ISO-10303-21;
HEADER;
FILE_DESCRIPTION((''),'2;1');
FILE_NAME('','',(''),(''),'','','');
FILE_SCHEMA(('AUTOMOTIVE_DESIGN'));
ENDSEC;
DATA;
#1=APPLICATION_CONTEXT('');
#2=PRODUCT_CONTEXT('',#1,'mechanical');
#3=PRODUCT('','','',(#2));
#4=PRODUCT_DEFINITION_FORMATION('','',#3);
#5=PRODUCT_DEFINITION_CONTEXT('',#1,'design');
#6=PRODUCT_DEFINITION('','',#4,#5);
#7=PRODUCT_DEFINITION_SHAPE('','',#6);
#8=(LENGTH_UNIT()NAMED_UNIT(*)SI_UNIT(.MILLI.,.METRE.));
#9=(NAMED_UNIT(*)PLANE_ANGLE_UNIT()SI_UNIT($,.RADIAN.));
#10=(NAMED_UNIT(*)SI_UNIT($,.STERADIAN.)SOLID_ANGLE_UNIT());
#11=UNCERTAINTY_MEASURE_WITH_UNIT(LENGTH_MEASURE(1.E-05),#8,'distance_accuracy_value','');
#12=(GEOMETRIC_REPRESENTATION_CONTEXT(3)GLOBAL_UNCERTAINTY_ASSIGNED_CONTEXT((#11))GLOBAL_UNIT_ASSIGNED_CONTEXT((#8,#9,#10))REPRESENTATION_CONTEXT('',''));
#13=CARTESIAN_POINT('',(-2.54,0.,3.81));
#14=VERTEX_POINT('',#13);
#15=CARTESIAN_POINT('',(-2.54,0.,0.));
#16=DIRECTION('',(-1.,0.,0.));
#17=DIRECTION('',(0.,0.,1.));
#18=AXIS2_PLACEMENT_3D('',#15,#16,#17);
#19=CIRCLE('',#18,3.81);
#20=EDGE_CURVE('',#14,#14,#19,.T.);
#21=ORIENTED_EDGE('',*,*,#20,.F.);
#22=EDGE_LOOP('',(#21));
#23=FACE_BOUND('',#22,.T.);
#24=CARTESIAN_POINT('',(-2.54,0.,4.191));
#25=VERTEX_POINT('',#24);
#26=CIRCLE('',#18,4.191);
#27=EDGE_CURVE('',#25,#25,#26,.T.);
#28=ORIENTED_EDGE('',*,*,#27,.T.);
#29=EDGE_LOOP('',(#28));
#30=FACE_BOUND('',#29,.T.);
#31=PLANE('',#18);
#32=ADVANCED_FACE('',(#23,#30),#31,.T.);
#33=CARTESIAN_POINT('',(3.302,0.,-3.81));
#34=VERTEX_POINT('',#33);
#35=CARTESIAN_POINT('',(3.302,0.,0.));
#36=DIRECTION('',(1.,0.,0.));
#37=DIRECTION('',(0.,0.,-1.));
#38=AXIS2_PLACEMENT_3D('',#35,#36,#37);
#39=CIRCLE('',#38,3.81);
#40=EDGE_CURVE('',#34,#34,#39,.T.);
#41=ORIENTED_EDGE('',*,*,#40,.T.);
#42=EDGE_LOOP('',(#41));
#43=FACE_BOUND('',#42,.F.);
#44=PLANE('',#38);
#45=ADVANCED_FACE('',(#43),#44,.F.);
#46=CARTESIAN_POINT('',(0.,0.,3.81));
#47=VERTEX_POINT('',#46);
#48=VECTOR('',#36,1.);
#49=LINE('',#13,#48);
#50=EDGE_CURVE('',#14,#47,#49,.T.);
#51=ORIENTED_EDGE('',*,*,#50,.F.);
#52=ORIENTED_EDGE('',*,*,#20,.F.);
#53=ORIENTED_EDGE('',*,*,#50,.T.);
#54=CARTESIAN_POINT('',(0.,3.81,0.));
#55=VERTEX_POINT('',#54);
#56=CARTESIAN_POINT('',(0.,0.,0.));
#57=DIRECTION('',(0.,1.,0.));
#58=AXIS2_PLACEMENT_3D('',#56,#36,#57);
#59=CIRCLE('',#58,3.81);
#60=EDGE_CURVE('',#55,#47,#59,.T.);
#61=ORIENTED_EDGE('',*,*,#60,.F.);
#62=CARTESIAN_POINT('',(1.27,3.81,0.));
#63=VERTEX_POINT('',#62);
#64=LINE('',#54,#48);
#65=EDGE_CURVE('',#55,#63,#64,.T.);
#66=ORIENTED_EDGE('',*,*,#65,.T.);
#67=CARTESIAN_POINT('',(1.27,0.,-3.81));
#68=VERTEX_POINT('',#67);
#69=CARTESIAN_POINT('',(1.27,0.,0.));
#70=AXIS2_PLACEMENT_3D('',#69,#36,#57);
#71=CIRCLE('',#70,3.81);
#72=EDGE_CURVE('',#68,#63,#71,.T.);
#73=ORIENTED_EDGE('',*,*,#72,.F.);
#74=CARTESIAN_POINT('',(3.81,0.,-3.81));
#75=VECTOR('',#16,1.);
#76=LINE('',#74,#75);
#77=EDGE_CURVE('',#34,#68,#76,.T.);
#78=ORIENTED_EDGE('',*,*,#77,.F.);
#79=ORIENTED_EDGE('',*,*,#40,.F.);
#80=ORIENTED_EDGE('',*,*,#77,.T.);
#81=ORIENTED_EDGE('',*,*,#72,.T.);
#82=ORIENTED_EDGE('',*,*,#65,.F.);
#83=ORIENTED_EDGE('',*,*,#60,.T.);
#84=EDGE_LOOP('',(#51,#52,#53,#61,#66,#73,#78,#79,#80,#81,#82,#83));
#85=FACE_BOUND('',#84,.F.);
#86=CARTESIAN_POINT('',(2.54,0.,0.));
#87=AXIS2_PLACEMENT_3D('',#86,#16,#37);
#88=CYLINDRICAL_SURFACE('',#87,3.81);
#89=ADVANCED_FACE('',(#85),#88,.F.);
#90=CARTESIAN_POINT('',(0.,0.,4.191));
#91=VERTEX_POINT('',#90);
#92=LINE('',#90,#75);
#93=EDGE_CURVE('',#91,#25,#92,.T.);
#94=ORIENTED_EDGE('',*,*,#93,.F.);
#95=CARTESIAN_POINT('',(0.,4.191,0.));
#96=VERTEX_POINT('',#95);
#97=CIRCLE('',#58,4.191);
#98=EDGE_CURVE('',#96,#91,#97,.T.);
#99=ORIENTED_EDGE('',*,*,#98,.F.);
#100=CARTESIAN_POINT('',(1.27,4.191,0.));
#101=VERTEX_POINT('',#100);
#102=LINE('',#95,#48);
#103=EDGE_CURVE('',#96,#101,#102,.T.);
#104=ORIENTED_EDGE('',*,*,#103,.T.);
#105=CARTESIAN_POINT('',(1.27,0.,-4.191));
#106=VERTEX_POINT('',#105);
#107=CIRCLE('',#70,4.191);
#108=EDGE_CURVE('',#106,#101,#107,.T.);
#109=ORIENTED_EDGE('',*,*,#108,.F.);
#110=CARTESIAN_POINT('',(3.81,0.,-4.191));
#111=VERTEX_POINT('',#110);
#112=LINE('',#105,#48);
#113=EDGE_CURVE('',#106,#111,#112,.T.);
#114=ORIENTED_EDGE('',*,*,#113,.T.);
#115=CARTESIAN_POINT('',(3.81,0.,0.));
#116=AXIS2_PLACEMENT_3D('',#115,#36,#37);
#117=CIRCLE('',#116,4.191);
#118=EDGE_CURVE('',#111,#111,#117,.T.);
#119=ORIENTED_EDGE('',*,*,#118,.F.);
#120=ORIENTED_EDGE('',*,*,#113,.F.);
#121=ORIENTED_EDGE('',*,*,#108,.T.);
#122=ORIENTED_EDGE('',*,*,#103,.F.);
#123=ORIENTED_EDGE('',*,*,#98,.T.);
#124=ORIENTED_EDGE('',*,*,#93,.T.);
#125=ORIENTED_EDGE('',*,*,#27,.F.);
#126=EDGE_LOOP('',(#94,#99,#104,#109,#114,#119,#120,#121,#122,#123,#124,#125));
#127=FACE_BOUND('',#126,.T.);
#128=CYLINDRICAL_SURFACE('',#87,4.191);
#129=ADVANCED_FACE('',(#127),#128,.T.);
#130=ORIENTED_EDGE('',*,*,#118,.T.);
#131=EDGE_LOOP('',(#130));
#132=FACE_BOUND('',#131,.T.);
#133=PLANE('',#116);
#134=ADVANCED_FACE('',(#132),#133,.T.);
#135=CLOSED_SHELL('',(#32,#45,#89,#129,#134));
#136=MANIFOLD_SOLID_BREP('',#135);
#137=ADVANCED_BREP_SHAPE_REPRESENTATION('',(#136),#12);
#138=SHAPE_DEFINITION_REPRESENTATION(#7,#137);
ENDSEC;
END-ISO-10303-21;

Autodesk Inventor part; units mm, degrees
ref_plane "YZ Plane" through (0, 0, 0) normal (1, 0, 0) x (0, 1, 0)
ref_plane "XZ Plane" through (0, 0, 0) normal (0, 1, 0) x (-1, 0, 0)
ref_plane "XY Plane" through (0, 0, 0) normal (0, 0, 1) x (1, 0, 0)
sketch "Sketch1" plane through (0, 0, 0) normal (1, 0, 0) x (0, 1, 0)
  circle A0 centre (0, 0) radius 4.191
  circle A1 centre (0, 0) radius 3.81
  dimension "d0" = 8.382
  dimension "d1" = 7.62
extrude "Extrusion1" add sketch "Sketch1" along normal blind 1.27
sketch "Sketch2" plane through (0, 0, 0) normal (-1, 0, 0) x (0, 0, 1)
  circle A0 centre (0, 0) radius 4.191
  circle A1 centre (0, 0) radius 3.81
  dimension "d5" = 8.382
  dimension "d4" = 7.62
extrude "Extrusion2" add sketch "Sketch2" along normal blind 1.27
sketch "Sketch3" plane through (-1.27, 0, 0) normal (-1, 0, 0) x (0, 0, 1)
  circle A0 centre (0, 0) radius 4.191
  circle A1 centre (0, 0) radius 3.81
  dimension "d10" = 8.382
  dimension "d9" = 7.62
extrude "Extrusion3" add sketch "Sketch3" along normal blind 1.27
sketch "Sketch4" plane through (1.27, 0, 0) normal (1, 0, 0) x (0, 0, -1)
  circle A0 centre (0, 0) radius 4.191
  circle A1 centre (0, 0) radius 3.81
  dimension "d15" = 8.382
  dimension "d14" = 7.62
extrude "Extrusion4" add sketch "Sketch4" along normal blind 1.27
sketch "Sketch5" plane through (2.54, 0, 0) normal (1, 0, 0) x (0, 0, -1)
  circle A0 centre (0, 0) radius 4.191
  circle A1 centre (0, 0) radius 3.81
  dimension "d20" = 8.382
  dimension "d19" = 7.62
extrude "Extrusion5" add sketch "Sketch5" along normal blind 1.27
sketch "Sketch6" plane through (3.81, 0, 0) normal (1, 0, 0) x (0, 0, -1)
  circle A0 centre (0, 0) radius 3.81
extrude "Extrusion6" add sketch "Sketch6" against normal blind 0.508
properties part number "rond"
